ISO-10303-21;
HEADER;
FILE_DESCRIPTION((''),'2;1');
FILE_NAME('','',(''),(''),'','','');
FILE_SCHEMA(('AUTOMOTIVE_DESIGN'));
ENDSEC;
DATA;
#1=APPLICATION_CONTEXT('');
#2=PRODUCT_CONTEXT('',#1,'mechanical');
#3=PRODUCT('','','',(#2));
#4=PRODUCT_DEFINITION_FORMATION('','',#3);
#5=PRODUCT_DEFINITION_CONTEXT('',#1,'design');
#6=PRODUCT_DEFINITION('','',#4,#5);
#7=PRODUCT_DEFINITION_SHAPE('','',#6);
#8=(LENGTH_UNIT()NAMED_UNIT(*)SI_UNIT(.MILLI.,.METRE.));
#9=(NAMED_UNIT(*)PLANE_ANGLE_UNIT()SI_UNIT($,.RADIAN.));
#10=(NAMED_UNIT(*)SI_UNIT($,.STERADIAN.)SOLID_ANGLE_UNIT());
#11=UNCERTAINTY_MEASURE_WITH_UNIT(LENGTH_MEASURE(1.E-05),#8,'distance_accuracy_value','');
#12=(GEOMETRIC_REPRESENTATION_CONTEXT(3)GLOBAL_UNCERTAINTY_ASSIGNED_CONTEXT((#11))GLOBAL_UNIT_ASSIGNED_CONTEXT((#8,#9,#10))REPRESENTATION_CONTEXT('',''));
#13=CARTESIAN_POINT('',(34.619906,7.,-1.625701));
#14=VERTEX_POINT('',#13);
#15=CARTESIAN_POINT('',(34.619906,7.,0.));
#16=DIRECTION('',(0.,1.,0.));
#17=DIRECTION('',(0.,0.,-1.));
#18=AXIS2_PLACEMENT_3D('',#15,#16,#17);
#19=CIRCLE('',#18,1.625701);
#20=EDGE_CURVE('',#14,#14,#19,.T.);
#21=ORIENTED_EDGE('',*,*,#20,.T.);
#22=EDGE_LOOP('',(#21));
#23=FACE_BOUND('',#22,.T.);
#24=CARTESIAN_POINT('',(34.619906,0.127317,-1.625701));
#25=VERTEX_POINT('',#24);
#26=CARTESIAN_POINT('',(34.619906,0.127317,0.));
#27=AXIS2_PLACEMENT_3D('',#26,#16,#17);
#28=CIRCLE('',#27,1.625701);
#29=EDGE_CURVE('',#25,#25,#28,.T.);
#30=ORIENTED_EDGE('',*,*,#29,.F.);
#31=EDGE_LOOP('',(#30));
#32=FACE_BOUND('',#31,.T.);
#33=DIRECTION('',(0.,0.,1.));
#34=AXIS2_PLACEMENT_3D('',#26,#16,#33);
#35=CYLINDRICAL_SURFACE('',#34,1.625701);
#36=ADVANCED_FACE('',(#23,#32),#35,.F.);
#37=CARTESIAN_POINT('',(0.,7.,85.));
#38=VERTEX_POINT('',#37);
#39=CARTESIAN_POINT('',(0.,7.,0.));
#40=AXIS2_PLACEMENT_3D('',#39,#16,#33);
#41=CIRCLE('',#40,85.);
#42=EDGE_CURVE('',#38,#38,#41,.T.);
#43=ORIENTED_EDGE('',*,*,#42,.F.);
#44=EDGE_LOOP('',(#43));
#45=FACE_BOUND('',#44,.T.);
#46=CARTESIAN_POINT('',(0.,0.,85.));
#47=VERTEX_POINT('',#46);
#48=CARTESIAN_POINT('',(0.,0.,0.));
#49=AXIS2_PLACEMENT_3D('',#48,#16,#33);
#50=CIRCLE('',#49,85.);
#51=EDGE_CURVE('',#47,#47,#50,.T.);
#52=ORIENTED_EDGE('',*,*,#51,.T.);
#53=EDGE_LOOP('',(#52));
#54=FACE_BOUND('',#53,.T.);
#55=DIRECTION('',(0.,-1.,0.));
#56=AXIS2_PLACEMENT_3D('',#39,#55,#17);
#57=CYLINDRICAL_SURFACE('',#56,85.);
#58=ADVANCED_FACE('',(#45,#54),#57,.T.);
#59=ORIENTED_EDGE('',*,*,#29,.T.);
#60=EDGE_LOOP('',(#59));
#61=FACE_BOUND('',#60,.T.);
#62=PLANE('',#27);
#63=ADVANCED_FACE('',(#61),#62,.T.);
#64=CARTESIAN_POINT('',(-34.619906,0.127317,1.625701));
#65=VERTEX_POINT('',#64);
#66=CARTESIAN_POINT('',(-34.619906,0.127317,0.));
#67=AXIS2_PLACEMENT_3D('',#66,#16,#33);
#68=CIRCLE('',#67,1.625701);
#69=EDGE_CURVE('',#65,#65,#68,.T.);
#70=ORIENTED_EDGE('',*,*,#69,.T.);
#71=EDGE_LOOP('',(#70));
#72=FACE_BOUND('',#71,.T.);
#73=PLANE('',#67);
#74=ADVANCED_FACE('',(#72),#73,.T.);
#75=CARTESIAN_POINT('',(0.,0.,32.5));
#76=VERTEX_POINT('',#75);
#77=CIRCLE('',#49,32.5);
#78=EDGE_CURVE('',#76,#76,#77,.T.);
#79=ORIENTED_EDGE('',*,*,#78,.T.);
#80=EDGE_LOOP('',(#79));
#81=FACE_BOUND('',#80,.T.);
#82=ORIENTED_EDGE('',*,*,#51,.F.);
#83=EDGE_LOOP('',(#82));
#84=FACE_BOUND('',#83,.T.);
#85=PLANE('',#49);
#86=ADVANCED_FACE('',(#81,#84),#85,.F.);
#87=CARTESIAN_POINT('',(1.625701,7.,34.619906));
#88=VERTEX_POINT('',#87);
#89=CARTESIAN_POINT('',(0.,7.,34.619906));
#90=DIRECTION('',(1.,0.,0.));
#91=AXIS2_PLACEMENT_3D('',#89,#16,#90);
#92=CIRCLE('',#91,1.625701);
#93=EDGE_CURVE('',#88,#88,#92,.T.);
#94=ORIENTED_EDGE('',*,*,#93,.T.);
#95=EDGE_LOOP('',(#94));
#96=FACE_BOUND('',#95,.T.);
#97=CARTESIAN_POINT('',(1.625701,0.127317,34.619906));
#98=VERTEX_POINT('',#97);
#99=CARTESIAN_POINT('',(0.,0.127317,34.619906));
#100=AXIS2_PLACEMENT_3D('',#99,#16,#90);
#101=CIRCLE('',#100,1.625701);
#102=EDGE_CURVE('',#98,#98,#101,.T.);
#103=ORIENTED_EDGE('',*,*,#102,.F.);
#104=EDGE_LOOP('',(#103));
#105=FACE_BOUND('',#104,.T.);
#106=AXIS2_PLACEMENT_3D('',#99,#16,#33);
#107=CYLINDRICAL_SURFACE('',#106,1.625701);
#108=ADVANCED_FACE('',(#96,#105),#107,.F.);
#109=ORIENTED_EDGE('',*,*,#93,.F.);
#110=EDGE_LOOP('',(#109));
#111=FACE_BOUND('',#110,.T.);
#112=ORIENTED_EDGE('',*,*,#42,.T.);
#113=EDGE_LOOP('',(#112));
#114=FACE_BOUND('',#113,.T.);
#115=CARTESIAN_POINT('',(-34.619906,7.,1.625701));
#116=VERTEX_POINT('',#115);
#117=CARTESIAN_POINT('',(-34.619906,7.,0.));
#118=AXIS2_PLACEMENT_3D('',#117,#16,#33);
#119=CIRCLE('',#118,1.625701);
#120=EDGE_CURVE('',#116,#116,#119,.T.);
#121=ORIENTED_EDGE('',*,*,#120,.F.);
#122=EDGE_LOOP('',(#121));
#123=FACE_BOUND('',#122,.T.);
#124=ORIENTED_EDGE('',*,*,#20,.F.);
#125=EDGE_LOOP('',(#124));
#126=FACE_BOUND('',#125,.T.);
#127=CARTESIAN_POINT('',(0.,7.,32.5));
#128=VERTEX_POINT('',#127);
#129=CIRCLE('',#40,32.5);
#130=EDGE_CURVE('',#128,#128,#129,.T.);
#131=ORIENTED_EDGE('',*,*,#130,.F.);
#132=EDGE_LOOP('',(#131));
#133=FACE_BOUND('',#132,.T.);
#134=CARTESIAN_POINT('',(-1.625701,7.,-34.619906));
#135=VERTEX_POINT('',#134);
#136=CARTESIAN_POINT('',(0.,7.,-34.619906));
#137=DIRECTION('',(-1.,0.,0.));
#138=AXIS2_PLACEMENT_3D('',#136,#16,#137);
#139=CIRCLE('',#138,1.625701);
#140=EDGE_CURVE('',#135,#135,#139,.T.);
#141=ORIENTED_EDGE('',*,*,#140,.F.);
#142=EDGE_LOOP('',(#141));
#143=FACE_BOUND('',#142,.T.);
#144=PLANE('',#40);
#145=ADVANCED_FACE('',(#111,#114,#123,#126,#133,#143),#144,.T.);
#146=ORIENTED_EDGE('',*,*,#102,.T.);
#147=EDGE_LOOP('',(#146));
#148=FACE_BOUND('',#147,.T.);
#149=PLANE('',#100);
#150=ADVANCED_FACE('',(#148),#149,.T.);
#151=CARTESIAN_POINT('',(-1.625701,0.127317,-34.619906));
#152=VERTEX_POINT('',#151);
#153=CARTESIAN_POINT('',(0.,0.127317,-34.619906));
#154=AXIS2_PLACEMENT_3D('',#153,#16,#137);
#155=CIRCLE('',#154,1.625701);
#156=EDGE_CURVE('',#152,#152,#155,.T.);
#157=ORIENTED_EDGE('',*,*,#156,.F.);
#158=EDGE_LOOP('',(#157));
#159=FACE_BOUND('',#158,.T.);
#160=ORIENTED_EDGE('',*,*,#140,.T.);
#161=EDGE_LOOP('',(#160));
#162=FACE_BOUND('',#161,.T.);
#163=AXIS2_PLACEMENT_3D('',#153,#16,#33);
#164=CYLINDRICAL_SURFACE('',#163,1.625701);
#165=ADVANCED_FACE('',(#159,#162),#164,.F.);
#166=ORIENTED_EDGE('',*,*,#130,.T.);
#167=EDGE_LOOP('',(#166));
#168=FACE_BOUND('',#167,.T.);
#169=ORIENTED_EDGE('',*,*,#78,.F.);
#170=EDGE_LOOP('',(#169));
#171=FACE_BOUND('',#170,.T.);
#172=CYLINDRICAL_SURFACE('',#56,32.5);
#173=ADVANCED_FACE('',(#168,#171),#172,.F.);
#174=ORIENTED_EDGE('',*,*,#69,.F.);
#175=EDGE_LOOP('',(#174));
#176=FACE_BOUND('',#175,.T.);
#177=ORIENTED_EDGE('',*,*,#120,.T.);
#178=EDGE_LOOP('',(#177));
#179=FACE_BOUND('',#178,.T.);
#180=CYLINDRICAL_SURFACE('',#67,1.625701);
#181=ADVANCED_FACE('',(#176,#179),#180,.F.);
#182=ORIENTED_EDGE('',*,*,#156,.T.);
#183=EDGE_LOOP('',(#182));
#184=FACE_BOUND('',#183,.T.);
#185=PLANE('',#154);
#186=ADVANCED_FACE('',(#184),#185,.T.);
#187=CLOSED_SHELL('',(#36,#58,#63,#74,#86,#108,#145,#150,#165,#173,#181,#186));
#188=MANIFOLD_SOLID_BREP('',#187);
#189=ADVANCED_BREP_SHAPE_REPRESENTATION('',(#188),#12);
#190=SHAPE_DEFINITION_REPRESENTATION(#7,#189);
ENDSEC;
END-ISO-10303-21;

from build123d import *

# Parameters (mm, degrees)
SKETCH1_R           = 85
BOSS_EXTRUDE1_DEPTH = 7
SKETCH2_R           = 32.5
CUT_EXTRUDE1_DEPTH  = 121.411793442
SKETCH3_R           = 1.625700543
CUT_EXTRUDE2_DEPTH  = 6.872683155
CIRPATTERN1_COUNT   = 4


with BuildPart() as part:
    # Sketch1 → Boss-Extrude1 (new body)
    with BuildSketch(Plane(origin=(0, 0, 0), x_dir=(1, 0, 0), z_dir=(0, 1, 0))):
        Circle(SKETCH1_R)
    extrude(amount=BOSS_EXTRUDE1_DEPTH)

    # Sketch2 → Cut-Extrude1 (cut, through all)
    with BuildSketch(Plane(origin=(0, 0, 0), x_dir=(1, 0, 0), z_dir=(0, 1, 0))):
        Circle(SKETCH2_R)
    extrude(amount=CUT_EXTRUDE1_DEPTH, mode=Mode.SUBTRACT)

    # Sketch3 → Cut-Extrude2 (cut)
    with BuildSketch(Plane(origin=(0, 7, 0), x_dir=(1, 0, 0), z_dir=(0, 1, 0))):
        with Locations((-34.619906271, 0)):
            Circle(SKETCH3_R)
    cut_extrude2 = extrude(amount=-CUT_EXTRUDE2_DEPTH, mode=Mode.SUBTRACT)

    # CirPattern1: Cut-Extrude2 ×4 about axis
    cirpattern1_axis = Axis((0, 0, 0), (0, 1, 0))
    for i in range(1, CIRPATTERN1_COUNT):
        add(cut_extrude2.rotate(cirpattern1_axis, i * 360 / CIRPATTERN1_COUNT), mode=Mode.SUBTRACT)


solid = part.part
